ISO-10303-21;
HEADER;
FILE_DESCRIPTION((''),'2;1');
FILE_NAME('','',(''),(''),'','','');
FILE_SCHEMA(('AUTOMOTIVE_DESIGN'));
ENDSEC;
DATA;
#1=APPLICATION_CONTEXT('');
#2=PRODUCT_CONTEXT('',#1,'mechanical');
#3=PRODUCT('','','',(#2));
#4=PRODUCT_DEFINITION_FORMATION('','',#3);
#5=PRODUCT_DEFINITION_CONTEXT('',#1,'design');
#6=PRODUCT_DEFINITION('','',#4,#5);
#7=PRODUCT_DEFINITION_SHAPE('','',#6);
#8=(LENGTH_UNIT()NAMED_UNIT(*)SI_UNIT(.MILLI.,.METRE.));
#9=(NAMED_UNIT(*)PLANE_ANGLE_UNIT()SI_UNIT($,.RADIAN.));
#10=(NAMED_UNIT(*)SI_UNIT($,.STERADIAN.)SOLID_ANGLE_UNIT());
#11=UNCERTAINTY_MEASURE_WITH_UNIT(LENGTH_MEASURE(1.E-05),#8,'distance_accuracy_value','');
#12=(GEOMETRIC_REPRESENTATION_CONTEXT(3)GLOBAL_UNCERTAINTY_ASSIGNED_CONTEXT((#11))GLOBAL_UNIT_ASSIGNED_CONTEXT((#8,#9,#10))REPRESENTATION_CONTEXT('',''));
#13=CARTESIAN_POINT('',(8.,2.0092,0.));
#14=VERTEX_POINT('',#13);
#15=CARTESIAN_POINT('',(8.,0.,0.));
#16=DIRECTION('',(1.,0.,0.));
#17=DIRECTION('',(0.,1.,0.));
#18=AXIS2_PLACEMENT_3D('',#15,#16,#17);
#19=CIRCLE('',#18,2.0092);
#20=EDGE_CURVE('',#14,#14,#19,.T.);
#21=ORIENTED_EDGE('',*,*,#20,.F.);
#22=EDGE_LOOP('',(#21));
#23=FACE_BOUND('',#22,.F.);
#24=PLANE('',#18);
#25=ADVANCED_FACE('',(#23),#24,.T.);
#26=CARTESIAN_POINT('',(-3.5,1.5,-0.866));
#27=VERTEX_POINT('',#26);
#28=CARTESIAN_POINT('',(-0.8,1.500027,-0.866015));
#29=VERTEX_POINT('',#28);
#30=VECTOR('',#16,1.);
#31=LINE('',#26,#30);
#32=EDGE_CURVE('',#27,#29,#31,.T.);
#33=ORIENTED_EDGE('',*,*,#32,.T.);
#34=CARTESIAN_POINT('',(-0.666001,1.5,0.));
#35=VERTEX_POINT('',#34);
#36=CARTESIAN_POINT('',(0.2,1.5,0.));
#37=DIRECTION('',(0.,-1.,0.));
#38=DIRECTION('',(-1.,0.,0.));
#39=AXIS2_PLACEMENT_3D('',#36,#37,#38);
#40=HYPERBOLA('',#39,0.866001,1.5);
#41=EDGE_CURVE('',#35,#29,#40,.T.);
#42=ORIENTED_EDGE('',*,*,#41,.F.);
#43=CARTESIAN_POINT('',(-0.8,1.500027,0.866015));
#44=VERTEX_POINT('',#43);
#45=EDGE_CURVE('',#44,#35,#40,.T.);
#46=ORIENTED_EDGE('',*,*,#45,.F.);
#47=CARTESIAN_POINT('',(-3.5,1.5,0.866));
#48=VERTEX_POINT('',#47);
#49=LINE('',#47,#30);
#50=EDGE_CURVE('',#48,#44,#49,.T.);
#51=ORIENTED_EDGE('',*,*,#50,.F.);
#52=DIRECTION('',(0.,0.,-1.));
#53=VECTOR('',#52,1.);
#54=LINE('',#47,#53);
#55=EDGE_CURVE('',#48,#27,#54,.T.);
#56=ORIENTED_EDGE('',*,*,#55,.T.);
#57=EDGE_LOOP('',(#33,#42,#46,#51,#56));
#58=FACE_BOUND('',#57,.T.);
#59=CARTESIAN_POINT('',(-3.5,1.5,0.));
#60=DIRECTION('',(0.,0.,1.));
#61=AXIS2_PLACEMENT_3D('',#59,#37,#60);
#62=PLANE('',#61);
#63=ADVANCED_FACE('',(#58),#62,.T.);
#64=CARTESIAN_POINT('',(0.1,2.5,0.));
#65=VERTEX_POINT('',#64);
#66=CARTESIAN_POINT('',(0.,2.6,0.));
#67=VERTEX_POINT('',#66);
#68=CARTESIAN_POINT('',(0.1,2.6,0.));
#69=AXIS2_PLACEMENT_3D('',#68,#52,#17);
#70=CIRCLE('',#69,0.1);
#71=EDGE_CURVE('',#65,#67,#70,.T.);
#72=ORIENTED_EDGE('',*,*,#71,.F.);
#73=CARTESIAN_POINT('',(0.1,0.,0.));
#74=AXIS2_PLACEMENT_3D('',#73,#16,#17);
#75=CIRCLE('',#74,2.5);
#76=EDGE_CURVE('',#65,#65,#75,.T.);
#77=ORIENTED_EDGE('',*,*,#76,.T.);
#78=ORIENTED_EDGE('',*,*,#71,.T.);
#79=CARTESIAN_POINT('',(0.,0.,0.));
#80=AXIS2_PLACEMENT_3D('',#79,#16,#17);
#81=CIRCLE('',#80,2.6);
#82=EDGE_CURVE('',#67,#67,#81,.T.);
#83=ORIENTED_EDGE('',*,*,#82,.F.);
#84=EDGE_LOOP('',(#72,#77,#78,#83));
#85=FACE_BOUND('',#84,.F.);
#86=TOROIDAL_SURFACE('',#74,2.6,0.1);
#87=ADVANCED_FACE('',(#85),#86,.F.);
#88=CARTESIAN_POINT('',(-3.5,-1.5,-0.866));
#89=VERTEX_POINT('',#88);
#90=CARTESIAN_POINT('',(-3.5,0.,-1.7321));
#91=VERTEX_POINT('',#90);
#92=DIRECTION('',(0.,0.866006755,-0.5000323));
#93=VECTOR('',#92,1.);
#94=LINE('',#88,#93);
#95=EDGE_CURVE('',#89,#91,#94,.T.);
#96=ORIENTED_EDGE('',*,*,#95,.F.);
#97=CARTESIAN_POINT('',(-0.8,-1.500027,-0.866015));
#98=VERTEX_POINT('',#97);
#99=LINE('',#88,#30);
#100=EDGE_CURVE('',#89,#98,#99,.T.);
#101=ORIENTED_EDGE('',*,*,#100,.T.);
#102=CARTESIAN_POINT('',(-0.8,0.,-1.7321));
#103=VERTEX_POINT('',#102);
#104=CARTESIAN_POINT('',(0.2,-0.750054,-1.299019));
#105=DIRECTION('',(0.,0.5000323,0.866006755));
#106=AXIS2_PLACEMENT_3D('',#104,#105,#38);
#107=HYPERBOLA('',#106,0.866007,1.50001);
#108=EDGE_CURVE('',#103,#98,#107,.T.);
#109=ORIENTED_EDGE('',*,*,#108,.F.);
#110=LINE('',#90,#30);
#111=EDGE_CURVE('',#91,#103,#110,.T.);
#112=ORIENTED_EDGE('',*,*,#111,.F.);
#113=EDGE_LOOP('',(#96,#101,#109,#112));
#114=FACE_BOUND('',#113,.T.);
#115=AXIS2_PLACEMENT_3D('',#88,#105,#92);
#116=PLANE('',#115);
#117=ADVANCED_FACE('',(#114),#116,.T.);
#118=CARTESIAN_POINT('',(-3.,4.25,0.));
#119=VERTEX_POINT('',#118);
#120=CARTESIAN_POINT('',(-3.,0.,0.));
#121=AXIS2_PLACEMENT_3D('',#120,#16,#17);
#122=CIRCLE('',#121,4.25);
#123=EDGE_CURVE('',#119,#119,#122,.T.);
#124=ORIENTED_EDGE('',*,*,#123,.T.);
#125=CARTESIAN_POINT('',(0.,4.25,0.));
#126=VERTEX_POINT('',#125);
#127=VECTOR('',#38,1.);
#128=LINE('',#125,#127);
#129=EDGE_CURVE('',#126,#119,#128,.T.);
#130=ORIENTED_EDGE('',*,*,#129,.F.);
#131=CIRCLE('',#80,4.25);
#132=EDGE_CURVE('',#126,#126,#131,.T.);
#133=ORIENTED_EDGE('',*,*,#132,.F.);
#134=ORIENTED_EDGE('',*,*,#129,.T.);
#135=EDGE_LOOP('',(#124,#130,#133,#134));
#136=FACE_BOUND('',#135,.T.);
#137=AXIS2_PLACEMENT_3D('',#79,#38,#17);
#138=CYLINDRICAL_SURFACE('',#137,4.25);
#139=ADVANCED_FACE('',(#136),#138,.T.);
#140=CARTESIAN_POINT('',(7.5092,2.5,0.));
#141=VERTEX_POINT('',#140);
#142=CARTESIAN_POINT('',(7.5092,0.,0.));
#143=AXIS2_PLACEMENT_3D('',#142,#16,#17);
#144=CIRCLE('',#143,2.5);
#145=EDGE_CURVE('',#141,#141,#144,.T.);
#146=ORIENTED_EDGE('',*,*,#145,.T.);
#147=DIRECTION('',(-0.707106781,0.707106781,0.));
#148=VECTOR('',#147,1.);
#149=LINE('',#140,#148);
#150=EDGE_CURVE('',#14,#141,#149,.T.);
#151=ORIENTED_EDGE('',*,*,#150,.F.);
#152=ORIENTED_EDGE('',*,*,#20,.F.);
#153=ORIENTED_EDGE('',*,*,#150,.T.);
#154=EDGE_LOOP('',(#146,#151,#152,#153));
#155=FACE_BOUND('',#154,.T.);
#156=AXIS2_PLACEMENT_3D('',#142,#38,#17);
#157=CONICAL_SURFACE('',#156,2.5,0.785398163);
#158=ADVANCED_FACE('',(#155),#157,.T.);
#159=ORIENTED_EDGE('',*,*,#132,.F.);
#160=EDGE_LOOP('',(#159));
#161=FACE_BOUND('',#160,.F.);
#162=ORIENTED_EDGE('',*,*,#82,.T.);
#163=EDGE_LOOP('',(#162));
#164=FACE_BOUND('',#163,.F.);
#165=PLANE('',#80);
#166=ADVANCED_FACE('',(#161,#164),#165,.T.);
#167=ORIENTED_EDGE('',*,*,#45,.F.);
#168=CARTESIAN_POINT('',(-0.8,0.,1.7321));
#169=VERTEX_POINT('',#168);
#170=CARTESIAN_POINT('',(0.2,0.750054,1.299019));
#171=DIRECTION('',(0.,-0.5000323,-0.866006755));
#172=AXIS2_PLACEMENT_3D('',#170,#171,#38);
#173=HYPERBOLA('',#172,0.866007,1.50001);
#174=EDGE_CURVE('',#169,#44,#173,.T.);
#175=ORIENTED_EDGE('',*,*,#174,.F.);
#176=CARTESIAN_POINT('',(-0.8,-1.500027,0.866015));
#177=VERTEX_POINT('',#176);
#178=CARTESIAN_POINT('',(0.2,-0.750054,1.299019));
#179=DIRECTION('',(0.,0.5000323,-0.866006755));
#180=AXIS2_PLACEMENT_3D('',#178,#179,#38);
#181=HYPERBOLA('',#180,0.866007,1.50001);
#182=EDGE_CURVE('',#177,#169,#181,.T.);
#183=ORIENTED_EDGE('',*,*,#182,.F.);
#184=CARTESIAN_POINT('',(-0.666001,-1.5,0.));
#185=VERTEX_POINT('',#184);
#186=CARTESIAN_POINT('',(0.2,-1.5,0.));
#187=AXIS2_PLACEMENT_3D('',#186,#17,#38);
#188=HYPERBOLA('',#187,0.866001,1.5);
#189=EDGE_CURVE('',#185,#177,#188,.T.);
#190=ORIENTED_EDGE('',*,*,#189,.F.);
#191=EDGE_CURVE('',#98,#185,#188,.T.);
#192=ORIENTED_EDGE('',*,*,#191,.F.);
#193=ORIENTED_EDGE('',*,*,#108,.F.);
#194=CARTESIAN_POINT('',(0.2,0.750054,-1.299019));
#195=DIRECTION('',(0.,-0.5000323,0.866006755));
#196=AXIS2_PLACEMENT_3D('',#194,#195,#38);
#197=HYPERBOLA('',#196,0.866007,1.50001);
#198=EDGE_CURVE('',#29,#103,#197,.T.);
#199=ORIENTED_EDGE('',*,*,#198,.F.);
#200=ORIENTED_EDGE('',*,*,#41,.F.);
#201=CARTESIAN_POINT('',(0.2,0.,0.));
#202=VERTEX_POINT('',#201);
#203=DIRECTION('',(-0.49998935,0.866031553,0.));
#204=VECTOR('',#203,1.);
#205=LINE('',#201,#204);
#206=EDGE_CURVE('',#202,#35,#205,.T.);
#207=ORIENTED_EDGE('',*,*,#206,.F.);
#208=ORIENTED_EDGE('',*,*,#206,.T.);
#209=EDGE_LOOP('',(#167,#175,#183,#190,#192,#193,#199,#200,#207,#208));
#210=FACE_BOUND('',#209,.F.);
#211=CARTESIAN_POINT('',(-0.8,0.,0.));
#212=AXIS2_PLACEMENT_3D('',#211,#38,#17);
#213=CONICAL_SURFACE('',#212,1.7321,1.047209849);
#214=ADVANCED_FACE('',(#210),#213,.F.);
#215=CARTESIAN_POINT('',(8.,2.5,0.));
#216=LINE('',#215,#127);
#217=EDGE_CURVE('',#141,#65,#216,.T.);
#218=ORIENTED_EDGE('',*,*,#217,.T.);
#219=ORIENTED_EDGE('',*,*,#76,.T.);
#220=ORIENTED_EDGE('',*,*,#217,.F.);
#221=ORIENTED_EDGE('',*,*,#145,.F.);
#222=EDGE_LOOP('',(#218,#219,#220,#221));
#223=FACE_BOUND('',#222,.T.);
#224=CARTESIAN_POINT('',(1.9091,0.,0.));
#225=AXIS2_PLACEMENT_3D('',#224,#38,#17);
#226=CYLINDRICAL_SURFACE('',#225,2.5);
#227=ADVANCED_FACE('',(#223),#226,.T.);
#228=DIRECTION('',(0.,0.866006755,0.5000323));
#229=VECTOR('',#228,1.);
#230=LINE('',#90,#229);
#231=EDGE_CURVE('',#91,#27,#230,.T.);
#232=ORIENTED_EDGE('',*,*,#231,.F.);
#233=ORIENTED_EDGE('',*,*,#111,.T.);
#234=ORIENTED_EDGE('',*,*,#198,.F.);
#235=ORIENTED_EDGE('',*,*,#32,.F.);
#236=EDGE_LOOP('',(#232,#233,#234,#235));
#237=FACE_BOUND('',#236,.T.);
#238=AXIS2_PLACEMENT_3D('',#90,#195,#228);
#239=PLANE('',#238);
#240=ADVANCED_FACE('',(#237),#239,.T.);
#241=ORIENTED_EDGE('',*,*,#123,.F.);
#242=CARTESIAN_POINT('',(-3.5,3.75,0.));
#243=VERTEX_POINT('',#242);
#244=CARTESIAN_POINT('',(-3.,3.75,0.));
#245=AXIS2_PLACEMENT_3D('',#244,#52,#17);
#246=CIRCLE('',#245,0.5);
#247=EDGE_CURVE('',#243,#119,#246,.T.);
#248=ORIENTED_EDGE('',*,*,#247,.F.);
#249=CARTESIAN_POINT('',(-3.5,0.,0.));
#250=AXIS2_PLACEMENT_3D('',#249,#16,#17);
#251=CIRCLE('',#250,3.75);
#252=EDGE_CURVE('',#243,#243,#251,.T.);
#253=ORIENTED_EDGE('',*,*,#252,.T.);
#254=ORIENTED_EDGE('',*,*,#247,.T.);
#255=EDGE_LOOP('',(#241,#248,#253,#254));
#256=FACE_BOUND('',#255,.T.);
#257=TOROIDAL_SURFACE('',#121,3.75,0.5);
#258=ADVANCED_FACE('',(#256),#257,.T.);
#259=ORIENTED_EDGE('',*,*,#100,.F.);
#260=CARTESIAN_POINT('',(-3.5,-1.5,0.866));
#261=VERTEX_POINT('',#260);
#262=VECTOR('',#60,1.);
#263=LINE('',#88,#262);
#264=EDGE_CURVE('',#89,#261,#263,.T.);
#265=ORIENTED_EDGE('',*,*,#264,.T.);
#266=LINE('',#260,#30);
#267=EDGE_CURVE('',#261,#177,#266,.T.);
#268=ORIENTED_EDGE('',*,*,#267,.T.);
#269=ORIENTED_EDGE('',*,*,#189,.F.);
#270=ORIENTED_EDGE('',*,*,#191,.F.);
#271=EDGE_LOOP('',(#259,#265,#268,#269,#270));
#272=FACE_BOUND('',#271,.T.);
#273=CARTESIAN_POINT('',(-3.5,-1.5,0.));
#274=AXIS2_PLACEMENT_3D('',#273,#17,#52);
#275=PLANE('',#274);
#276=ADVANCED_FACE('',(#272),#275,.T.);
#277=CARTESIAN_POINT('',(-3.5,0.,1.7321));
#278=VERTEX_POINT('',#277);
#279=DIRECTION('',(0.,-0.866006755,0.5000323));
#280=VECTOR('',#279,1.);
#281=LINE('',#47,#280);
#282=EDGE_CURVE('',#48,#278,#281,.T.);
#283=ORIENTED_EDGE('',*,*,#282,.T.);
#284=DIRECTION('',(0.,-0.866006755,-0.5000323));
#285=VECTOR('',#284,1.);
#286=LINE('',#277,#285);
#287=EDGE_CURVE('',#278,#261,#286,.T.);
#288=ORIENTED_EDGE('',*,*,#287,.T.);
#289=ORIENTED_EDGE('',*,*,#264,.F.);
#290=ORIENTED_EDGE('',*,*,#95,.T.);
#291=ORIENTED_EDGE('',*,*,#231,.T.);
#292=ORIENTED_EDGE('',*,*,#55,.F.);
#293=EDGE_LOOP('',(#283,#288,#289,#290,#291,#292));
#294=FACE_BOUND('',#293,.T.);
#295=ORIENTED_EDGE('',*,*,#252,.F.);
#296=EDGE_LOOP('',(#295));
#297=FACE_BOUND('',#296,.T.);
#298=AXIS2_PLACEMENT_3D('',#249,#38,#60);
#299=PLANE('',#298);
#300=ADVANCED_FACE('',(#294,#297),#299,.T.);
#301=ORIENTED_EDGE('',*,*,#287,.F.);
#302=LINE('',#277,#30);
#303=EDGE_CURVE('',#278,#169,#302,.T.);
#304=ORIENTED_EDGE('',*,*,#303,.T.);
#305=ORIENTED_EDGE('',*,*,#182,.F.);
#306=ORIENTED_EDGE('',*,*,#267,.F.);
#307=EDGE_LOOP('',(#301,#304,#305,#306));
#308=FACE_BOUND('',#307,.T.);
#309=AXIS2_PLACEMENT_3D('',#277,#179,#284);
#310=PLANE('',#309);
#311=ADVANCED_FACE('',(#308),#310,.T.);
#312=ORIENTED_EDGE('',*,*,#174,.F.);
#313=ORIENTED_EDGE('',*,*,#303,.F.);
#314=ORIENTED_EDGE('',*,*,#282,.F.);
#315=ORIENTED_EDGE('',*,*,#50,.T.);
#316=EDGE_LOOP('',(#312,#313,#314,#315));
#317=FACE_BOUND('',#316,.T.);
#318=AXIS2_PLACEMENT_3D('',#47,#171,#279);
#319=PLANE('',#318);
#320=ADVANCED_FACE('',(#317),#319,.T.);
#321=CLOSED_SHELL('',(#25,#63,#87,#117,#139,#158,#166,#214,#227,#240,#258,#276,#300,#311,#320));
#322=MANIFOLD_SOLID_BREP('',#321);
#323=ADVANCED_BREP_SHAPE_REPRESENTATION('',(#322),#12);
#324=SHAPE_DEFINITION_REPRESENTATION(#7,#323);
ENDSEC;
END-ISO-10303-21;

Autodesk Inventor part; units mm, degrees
ref_plane "YZ Plane" through (0, 0, 0) normal (1, 0, 0) x (0, 1, 0)
ref_plane "XZ Plane" through (0, 0, 0) normal (0, 1, 0) x (-1, 0, 0)
sketch "Skizze1" plane through (0, 0, 0) normal (0, 0, 1) x (1, 0, 0)
  line L0 (0.2, 0) -> (8, 0)
  line L1 (8, 0) -> (8, 2.5)
  line L2 (8, 2.5) -> (2.4, 2.5)
  line L3 (2.4, 2.5) -> (1.9091, 2.5)
  line L4 (1.9091, 2.5) -> (0, 2.5)
  line L5 (0, 2.5) -> (0, 4.25)
  line L6 (0, 4.25) -> (-3.5, 4.25)
  line L7 (-3.5, 4.25) -> (-3.5, 1.7321)
  line L8 (-3.5, 1.7321) -> (-0.8, 1.7321)
  line L9 (-0.8, 1.7321) -> (0.2, 0)
  line L10 (-5.8, 0) -> (10.3, 0) projected
  line L11 (0, -0.85) -> (0, 5.1) projected
  line L12 (2.4, 2.5) -> (0, 2.5) construction
  dimension "d1" = 5.6
  dimension "d2" = 0.4909
  dimension "d3" = 3.5
  dimension "d4" = 2.7
  dimension "d5" = 60
  dimension "d6" = 5
  dimension "d7" = 5
  dimension "d8" = 3.4641
  dimension "d9" = 8.5
  dimension "d26" = 8
revolve "Körper" add sketch "Skizze1" angle 360 about axis through (0.2, 0, 0) along (1, 0, 0) contours L9 L11 L4 L3 L2 L1 L0 | L9 L8 L7 L6 L5 L11
sketch "Skizze2" plane through (-3.5, 0, 0) normal (-1, 0, 0) x (0, 0, 1)
  circle A0 centre (0, 0) radius 1.7321 projected
  line L0 (0, -5.95) -> (0, 5.95) projected
  line L1 (-5.95, 0) -> (5.95, 0) projected
  line L2 (1.7321, 0) -> (0.866, -1.5)
  line L3 (0.866, -1.5) -> (-0.866, -1.5)
  line L4 (-0.866, -1.5) -> (-1.7321, 0)
  line L5 (-1.7321, 0) -> (-0.866, 1.5)
  line L6 (-0.866, 1.5) -> (0.866, 1.5)
  line L7 (0.866, 1.5) -> (1.7321, 0)
extrude "Loch" add sketch "Skizze2" against normal up to next contours L7 A0 | A0 L2 | L6 L0 A0 | A0 L0 L3 | L0 L6 A0 | A0 L3 L0 | L4 A0 | A0 L5
fillet "Rundung1" radius 0.5 1 edges at (-3.5, -4.25, 0)
thread "Gewinde" size "M5x0.8" class "6g" standard "ISO Metric profile" length 5.6
chamfer "Fase1" distance 0.4908 distance2 0.4908 1 edges at (8, -2.5, 0) measured on face at (8, -0.6238, -0.819)
ref_plane "Work Plane1" through (29, 0, 0) normal (0, -1, 0) x (1, 0, 0)
fillet "Fillet2" radius 0.1 1 edges at (0, -2.5, 0)
equation "\"d1\" = GEL"
equation "\"d3\" = KOH"
equation "\"d4\" = INTI"
equation "\"d6\" = GD"
equation "\"d7\" = BDM"
equation "\"d8\" = 1.1547 * SW"
equation "\"d9\" = KOD"
equation "\"d26\" = NLG"
equation "\"d30\" = R"
equation "\"d17\" = RR"
equation "\"d13\" = GEL"
equation "\"d15\" = -0.5 * SPD + 0.5 * GD"
equation "\"d16\" = GUL"
equation "\"GD\" = NND"
equation "\"NLG\" = 8"
equation "\"GEL\" = 5.6"
equation "\"KOD\" = 8.5"
equation "\"KOH\" = 3.5"
equation "\"INTI\" = 2.7"
equation "\"GAL\" = 0.61345 * PTC"
equation "\"GUL\" = 0.61345 * PTC"
equation "\"BDM\" = NND"
equation "\"SW\" = 3"
equation "\"RR\" = 0.5"
equation "\"SPD\" = NND - 1.2269 * PTC"
equation "\"R\" = 0.1"
equation "\"TOA\" = 30deg"
equation "\"GD1\" = THREADDIA - 1.2269 * PTC"
equation "\"THREADDIA\" = 5"
equation "\"FAWI\" = 45deg"
equation "\"ANG\" = 120deg"
equation "\"PTC\" = 0.8"
equation "\"NND\" = 5"
equation "\"E0\" = 1.155 * SW"
properties part number "DIN 7984 - M5 x 8" material "Steel, Mild"
